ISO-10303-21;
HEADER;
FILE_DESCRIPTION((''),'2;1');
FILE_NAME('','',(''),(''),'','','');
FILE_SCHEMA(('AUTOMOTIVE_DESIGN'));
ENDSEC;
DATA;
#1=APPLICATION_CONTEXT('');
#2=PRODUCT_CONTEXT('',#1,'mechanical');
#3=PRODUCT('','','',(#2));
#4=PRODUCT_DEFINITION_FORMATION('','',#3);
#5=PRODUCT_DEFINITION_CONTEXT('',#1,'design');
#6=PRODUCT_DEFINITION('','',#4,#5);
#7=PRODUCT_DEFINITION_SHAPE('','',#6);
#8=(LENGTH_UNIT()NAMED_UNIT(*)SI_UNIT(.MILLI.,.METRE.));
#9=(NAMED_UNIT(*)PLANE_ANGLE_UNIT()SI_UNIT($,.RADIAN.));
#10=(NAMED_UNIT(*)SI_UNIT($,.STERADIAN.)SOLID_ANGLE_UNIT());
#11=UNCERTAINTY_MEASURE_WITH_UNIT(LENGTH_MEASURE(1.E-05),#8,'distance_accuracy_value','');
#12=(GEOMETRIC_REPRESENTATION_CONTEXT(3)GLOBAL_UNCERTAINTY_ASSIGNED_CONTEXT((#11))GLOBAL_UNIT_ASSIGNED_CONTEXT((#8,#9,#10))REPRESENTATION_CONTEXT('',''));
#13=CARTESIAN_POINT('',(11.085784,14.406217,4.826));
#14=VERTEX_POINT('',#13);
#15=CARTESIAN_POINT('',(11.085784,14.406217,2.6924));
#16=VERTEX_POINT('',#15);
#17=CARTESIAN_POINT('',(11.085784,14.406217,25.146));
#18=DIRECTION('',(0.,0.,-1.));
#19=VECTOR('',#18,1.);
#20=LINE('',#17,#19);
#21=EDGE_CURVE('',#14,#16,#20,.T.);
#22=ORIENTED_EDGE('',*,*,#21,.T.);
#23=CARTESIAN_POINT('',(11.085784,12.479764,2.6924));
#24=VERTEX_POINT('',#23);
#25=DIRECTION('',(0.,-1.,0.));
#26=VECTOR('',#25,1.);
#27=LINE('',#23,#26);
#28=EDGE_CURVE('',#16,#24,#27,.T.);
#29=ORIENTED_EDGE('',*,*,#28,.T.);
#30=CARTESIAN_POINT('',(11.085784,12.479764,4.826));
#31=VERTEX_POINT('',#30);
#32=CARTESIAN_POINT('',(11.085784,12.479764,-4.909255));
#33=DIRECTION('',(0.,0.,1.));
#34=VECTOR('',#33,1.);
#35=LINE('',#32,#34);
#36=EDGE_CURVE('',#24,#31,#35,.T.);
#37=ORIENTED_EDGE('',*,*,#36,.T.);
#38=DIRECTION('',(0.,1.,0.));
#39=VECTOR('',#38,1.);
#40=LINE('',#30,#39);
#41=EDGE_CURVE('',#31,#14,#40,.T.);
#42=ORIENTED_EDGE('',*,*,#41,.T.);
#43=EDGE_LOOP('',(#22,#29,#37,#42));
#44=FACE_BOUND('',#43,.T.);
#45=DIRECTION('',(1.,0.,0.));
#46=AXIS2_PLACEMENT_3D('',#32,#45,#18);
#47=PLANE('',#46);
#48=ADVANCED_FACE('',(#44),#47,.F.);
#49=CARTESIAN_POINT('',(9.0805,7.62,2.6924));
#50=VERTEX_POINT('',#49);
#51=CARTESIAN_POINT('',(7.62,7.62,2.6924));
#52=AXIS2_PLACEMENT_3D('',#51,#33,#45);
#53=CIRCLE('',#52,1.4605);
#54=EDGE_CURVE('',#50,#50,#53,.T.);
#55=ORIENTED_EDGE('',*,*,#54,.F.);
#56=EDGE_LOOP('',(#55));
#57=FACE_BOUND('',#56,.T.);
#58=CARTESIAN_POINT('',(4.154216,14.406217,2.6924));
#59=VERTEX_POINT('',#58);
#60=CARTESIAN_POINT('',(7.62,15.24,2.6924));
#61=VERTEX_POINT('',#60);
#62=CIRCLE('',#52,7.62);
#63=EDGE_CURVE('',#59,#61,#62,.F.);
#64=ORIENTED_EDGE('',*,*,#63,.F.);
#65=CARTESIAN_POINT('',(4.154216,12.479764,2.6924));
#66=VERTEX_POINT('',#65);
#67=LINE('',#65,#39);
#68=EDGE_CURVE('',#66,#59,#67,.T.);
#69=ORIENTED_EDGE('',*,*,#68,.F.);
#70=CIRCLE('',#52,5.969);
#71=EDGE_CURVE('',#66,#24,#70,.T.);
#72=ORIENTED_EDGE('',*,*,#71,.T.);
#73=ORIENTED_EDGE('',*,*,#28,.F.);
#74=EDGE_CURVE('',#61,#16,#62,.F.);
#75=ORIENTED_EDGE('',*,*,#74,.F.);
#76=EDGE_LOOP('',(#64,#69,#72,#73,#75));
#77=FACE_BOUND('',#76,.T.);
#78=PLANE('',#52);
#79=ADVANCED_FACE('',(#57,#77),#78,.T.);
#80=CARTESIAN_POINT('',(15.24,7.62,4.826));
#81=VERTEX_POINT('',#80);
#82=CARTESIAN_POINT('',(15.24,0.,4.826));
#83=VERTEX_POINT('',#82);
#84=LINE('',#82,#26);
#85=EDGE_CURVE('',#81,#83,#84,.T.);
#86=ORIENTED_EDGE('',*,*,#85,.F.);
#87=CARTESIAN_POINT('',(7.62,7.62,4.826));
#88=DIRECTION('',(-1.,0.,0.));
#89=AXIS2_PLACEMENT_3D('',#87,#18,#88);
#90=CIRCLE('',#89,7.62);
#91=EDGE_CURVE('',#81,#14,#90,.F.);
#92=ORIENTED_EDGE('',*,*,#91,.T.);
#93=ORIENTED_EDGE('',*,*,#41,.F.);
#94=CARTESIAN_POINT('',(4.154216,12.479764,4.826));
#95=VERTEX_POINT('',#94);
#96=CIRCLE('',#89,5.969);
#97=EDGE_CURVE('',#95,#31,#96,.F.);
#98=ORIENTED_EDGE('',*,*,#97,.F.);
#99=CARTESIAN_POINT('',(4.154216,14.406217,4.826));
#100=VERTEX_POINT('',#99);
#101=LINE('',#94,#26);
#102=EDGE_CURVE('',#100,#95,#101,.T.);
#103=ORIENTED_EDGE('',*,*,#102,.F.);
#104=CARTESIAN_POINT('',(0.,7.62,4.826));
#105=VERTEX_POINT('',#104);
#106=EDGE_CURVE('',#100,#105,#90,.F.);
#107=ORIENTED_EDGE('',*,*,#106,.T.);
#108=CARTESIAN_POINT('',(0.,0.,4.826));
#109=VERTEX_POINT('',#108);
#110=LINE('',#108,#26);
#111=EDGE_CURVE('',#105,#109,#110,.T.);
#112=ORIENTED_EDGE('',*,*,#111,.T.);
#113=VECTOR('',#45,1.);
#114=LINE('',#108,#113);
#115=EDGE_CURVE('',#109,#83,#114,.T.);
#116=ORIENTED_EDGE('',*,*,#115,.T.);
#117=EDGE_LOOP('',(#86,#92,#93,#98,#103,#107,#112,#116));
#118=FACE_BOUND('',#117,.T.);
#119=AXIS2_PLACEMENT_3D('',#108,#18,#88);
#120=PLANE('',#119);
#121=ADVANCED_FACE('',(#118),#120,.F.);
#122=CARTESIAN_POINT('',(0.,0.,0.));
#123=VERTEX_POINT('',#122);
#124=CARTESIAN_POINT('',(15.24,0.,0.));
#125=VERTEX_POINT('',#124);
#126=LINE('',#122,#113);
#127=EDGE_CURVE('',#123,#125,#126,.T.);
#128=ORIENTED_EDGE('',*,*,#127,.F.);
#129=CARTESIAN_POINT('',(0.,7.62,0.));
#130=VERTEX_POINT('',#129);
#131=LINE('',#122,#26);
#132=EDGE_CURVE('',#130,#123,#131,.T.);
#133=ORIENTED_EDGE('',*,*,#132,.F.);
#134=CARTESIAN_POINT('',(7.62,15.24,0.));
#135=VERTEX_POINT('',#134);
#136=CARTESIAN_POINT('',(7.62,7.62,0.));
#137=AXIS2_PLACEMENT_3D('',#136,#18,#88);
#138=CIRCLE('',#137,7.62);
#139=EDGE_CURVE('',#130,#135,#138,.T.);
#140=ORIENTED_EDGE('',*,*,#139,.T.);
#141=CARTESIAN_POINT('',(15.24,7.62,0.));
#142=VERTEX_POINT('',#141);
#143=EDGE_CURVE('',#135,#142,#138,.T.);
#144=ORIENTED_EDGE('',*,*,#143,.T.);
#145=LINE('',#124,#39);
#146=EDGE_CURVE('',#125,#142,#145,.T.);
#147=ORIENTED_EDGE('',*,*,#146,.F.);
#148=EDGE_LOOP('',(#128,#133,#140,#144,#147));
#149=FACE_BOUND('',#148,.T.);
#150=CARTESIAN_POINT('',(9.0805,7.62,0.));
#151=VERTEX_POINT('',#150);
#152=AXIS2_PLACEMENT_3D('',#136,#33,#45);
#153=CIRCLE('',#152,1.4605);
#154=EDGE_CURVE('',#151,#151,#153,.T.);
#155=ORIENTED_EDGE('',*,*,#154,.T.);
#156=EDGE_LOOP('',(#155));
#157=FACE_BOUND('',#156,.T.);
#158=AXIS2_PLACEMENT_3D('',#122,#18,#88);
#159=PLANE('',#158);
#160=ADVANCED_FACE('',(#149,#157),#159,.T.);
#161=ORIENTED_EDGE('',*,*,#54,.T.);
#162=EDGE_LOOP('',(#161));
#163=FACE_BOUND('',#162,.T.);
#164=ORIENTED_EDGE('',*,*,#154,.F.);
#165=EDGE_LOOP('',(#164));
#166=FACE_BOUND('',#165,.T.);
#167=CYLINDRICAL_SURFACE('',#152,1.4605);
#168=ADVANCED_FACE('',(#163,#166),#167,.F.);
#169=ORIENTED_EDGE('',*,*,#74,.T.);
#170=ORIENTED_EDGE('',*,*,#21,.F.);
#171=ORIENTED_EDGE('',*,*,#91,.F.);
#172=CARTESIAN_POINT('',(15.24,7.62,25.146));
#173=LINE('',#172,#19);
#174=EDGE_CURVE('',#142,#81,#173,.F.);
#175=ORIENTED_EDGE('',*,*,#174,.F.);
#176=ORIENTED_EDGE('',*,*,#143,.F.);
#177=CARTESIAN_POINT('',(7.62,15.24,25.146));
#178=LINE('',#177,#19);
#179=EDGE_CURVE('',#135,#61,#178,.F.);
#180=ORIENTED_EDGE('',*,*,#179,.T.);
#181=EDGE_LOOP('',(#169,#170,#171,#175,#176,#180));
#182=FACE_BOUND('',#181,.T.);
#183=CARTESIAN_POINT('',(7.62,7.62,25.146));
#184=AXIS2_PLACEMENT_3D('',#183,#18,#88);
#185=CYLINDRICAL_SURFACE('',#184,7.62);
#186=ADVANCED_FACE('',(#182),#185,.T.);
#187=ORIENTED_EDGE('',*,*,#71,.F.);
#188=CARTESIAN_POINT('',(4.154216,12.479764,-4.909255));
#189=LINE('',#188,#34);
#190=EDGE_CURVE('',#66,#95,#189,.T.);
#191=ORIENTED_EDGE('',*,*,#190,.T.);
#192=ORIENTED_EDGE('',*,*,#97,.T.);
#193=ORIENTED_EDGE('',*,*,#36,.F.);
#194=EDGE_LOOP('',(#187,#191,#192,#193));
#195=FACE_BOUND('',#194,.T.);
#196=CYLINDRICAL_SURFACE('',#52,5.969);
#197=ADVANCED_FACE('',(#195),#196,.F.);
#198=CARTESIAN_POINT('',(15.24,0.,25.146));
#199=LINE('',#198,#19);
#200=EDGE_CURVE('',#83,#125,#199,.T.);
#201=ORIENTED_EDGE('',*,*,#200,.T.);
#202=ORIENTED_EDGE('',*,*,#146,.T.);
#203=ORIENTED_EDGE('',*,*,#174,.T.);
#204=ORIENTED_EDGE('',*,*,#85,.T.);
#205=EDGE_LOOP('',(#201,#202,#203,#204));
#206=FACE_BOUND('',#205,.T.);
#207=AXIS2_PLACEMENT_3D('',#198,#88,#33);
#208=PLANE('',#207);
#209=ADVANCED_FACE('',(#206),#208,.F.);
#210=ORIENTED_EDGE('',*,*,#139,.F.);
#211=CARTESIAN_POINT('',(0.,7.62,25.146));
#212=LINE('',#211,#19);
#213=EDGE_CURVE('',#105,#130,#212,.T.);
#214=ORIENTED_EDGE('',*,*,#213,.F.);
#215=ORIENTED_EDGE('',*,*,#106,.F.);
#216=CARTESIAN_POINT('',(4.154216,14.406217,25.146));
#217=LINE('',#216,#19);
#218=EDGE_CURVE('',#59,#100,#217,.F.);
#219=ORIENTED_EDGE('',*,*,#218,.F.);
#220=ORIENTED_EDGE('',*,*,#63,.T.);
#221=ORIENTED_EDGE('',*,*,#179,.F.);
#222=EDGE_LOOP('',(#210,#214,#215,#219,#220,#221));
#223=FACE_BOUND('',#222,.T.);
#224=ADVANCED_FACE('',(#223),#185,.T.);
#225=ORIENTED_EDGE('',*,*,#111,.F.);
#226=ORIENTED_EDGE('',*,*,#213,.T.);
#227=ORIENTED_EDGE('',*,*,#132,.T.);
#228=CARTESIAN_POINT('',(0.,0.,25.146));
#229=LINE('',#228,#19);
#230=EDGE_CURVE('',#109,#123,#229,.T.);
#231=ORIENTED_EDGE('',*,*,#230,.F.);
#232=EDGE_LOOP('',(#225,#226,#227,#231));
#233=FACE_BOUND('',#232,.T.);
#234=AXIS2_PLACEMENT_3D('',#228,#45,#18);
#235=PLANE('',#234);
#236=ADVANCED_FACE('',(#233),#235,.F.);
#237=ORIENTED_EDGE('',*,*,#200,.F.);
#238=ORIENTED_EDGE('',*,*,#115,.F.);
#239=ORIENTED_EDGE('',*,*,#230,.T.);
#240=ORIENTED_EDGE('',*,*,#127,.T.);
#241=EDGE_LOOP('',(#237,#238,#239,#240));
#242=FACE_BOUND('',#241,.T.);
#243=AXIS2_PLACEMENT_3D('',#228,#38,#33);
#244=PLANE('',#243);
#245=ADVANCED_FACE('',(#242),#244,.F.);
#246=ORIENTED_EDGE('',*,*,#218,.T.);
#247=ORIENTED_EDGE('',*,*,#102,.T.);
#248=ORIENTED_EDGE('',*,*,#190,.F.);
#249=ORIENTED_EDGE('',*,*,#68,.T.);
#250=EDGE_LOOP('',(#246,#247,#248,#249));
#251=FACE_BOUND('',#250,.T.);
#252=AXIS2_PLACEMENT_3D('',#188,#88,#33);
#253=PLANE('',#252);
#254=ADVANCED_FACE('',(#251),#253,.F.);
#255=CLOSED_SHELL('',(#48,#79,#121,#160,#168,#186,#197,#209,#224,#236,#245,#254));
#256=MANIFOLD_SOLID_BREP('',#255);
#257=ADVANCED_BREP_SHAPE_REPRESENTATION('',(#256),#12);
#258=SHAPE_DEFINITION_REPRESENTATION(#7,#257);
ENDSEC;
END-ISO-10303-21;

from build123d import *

# Parameters (mm, degrees)
SKETCH1_W           = 15.24
SKETCH1_H           = 15.24
BOSS_EXTRUDE1_DEPTH = 25.146
SKETCH2_R           = 5.969
CUT_EXTRUDE1_DEPTH  = 22.4536
FILLET1_R           = 7.62
CUT_EXTRUDE2_DEPTH  = 22.4536
SKETCH4_R           = 1.4605
CUT_EXTRUDE3_DEPTH  = 32.123614073
SKETCH6_W           = 16.374741922
SKETCH6_H           = 17.109502327
CUT_EXTRUDE5_DEPTH  = 20.32
SKETCH5_W           = 2.54
SKETCH5_H           = 2.54
CUT_EXTRUDE4_DEPTH  = 6.35


with BuildPart() as part:
    # Sketch1 → Boss-Extrude1 (new body)
    with BuildSketch(Plane.XY):
        with Locations((7.62, 7.62)):
            Rectangle(SKETCH1_W, SKETCH1_H)
    extrude(amount=BOSS_EXTRUDE1_DEPTH)

    # Sketch2 → Cut-Extrude1 (cut)
    with BuildSketch(Plane.XY.offset(25.146)):
        with Locations((7.62, 7.62)):
            Circle(SKETCH2_R)
    extrude(amount=-CUT_EXTRUDE1_DEPTH, mode=Mode.SUBTRACT)

    # Fillet1
    fillet1_edges = [part.edges().sort_by_distance(p)[0] for p in [
        (15.24, 15.24, 12.573),
        (0, 15.24, 12.573),
    ]]
    fillet(fillet1_edges, radius=FILLET1_R - 0.0001)  # a hair under: the kernel refuses the full size

    # Sketch3 → Cut-Extrude2 (cut)
    with BuildSketch(Plane.XY.offset(25.146)):
        with BuildLine():
            Line((11.085783791, 12.479763751), (11.085783791, 15.600426387))
            Line((11.085783791, 15.600426387), (4.154216209, 15.600426387))
            Line((4.154216209, 15.600426387), (4.154216209, 12.479763751))
            ThreePointArc((4.154216209, 12.479763751), (7.62, 13.589), (11.085783791, 12.479763751))
        make_face()
    extrude(amount=-CUT_EXTRUDE2_DEPTH, mode=Mode.SUBTRACT)

    # Sketch4 → Cut-Extrude3 (cut, through all)
    with BuildSketch(Plane.XY.offset(2.6924)):
        with Locations((7.62, 7.62)):
            Circle(SKETCH4_R)
    extrude(amount=-CUT_EXTRUDE3_DEPTH, mode=Mode.SUBTRACT)

    # Sketch6 → Cut-Extrude5 (cut)
    with BuildSketch(Plane.XY.offset(25.146)):
        with Locations((8.187370961, 8.554751164)):
            Rectangle(SKETCH6_W, SKETCH6_H)
    extrude(amount=-CUT_EXTRUDE5_DEPTH, mode=Mode.SUBTRACT)

    # Sketch5 → Cut-Extrude4 (cut)
    with BuildSketch(Plane.XY.offset(25.146)):
        with Locations((1.27, 1.27)):
            Rectangle(SKETCH5_W, SKETCH5_H)
        with Locations((13.97, 1.27)):
            Rectangle(SKETCH5_W, SKETCH5_H)
    extrude(amount=-CUT_EXTRUDE4_DEPTH, mode=Mode.SUBTRACT)


solid = part.part
